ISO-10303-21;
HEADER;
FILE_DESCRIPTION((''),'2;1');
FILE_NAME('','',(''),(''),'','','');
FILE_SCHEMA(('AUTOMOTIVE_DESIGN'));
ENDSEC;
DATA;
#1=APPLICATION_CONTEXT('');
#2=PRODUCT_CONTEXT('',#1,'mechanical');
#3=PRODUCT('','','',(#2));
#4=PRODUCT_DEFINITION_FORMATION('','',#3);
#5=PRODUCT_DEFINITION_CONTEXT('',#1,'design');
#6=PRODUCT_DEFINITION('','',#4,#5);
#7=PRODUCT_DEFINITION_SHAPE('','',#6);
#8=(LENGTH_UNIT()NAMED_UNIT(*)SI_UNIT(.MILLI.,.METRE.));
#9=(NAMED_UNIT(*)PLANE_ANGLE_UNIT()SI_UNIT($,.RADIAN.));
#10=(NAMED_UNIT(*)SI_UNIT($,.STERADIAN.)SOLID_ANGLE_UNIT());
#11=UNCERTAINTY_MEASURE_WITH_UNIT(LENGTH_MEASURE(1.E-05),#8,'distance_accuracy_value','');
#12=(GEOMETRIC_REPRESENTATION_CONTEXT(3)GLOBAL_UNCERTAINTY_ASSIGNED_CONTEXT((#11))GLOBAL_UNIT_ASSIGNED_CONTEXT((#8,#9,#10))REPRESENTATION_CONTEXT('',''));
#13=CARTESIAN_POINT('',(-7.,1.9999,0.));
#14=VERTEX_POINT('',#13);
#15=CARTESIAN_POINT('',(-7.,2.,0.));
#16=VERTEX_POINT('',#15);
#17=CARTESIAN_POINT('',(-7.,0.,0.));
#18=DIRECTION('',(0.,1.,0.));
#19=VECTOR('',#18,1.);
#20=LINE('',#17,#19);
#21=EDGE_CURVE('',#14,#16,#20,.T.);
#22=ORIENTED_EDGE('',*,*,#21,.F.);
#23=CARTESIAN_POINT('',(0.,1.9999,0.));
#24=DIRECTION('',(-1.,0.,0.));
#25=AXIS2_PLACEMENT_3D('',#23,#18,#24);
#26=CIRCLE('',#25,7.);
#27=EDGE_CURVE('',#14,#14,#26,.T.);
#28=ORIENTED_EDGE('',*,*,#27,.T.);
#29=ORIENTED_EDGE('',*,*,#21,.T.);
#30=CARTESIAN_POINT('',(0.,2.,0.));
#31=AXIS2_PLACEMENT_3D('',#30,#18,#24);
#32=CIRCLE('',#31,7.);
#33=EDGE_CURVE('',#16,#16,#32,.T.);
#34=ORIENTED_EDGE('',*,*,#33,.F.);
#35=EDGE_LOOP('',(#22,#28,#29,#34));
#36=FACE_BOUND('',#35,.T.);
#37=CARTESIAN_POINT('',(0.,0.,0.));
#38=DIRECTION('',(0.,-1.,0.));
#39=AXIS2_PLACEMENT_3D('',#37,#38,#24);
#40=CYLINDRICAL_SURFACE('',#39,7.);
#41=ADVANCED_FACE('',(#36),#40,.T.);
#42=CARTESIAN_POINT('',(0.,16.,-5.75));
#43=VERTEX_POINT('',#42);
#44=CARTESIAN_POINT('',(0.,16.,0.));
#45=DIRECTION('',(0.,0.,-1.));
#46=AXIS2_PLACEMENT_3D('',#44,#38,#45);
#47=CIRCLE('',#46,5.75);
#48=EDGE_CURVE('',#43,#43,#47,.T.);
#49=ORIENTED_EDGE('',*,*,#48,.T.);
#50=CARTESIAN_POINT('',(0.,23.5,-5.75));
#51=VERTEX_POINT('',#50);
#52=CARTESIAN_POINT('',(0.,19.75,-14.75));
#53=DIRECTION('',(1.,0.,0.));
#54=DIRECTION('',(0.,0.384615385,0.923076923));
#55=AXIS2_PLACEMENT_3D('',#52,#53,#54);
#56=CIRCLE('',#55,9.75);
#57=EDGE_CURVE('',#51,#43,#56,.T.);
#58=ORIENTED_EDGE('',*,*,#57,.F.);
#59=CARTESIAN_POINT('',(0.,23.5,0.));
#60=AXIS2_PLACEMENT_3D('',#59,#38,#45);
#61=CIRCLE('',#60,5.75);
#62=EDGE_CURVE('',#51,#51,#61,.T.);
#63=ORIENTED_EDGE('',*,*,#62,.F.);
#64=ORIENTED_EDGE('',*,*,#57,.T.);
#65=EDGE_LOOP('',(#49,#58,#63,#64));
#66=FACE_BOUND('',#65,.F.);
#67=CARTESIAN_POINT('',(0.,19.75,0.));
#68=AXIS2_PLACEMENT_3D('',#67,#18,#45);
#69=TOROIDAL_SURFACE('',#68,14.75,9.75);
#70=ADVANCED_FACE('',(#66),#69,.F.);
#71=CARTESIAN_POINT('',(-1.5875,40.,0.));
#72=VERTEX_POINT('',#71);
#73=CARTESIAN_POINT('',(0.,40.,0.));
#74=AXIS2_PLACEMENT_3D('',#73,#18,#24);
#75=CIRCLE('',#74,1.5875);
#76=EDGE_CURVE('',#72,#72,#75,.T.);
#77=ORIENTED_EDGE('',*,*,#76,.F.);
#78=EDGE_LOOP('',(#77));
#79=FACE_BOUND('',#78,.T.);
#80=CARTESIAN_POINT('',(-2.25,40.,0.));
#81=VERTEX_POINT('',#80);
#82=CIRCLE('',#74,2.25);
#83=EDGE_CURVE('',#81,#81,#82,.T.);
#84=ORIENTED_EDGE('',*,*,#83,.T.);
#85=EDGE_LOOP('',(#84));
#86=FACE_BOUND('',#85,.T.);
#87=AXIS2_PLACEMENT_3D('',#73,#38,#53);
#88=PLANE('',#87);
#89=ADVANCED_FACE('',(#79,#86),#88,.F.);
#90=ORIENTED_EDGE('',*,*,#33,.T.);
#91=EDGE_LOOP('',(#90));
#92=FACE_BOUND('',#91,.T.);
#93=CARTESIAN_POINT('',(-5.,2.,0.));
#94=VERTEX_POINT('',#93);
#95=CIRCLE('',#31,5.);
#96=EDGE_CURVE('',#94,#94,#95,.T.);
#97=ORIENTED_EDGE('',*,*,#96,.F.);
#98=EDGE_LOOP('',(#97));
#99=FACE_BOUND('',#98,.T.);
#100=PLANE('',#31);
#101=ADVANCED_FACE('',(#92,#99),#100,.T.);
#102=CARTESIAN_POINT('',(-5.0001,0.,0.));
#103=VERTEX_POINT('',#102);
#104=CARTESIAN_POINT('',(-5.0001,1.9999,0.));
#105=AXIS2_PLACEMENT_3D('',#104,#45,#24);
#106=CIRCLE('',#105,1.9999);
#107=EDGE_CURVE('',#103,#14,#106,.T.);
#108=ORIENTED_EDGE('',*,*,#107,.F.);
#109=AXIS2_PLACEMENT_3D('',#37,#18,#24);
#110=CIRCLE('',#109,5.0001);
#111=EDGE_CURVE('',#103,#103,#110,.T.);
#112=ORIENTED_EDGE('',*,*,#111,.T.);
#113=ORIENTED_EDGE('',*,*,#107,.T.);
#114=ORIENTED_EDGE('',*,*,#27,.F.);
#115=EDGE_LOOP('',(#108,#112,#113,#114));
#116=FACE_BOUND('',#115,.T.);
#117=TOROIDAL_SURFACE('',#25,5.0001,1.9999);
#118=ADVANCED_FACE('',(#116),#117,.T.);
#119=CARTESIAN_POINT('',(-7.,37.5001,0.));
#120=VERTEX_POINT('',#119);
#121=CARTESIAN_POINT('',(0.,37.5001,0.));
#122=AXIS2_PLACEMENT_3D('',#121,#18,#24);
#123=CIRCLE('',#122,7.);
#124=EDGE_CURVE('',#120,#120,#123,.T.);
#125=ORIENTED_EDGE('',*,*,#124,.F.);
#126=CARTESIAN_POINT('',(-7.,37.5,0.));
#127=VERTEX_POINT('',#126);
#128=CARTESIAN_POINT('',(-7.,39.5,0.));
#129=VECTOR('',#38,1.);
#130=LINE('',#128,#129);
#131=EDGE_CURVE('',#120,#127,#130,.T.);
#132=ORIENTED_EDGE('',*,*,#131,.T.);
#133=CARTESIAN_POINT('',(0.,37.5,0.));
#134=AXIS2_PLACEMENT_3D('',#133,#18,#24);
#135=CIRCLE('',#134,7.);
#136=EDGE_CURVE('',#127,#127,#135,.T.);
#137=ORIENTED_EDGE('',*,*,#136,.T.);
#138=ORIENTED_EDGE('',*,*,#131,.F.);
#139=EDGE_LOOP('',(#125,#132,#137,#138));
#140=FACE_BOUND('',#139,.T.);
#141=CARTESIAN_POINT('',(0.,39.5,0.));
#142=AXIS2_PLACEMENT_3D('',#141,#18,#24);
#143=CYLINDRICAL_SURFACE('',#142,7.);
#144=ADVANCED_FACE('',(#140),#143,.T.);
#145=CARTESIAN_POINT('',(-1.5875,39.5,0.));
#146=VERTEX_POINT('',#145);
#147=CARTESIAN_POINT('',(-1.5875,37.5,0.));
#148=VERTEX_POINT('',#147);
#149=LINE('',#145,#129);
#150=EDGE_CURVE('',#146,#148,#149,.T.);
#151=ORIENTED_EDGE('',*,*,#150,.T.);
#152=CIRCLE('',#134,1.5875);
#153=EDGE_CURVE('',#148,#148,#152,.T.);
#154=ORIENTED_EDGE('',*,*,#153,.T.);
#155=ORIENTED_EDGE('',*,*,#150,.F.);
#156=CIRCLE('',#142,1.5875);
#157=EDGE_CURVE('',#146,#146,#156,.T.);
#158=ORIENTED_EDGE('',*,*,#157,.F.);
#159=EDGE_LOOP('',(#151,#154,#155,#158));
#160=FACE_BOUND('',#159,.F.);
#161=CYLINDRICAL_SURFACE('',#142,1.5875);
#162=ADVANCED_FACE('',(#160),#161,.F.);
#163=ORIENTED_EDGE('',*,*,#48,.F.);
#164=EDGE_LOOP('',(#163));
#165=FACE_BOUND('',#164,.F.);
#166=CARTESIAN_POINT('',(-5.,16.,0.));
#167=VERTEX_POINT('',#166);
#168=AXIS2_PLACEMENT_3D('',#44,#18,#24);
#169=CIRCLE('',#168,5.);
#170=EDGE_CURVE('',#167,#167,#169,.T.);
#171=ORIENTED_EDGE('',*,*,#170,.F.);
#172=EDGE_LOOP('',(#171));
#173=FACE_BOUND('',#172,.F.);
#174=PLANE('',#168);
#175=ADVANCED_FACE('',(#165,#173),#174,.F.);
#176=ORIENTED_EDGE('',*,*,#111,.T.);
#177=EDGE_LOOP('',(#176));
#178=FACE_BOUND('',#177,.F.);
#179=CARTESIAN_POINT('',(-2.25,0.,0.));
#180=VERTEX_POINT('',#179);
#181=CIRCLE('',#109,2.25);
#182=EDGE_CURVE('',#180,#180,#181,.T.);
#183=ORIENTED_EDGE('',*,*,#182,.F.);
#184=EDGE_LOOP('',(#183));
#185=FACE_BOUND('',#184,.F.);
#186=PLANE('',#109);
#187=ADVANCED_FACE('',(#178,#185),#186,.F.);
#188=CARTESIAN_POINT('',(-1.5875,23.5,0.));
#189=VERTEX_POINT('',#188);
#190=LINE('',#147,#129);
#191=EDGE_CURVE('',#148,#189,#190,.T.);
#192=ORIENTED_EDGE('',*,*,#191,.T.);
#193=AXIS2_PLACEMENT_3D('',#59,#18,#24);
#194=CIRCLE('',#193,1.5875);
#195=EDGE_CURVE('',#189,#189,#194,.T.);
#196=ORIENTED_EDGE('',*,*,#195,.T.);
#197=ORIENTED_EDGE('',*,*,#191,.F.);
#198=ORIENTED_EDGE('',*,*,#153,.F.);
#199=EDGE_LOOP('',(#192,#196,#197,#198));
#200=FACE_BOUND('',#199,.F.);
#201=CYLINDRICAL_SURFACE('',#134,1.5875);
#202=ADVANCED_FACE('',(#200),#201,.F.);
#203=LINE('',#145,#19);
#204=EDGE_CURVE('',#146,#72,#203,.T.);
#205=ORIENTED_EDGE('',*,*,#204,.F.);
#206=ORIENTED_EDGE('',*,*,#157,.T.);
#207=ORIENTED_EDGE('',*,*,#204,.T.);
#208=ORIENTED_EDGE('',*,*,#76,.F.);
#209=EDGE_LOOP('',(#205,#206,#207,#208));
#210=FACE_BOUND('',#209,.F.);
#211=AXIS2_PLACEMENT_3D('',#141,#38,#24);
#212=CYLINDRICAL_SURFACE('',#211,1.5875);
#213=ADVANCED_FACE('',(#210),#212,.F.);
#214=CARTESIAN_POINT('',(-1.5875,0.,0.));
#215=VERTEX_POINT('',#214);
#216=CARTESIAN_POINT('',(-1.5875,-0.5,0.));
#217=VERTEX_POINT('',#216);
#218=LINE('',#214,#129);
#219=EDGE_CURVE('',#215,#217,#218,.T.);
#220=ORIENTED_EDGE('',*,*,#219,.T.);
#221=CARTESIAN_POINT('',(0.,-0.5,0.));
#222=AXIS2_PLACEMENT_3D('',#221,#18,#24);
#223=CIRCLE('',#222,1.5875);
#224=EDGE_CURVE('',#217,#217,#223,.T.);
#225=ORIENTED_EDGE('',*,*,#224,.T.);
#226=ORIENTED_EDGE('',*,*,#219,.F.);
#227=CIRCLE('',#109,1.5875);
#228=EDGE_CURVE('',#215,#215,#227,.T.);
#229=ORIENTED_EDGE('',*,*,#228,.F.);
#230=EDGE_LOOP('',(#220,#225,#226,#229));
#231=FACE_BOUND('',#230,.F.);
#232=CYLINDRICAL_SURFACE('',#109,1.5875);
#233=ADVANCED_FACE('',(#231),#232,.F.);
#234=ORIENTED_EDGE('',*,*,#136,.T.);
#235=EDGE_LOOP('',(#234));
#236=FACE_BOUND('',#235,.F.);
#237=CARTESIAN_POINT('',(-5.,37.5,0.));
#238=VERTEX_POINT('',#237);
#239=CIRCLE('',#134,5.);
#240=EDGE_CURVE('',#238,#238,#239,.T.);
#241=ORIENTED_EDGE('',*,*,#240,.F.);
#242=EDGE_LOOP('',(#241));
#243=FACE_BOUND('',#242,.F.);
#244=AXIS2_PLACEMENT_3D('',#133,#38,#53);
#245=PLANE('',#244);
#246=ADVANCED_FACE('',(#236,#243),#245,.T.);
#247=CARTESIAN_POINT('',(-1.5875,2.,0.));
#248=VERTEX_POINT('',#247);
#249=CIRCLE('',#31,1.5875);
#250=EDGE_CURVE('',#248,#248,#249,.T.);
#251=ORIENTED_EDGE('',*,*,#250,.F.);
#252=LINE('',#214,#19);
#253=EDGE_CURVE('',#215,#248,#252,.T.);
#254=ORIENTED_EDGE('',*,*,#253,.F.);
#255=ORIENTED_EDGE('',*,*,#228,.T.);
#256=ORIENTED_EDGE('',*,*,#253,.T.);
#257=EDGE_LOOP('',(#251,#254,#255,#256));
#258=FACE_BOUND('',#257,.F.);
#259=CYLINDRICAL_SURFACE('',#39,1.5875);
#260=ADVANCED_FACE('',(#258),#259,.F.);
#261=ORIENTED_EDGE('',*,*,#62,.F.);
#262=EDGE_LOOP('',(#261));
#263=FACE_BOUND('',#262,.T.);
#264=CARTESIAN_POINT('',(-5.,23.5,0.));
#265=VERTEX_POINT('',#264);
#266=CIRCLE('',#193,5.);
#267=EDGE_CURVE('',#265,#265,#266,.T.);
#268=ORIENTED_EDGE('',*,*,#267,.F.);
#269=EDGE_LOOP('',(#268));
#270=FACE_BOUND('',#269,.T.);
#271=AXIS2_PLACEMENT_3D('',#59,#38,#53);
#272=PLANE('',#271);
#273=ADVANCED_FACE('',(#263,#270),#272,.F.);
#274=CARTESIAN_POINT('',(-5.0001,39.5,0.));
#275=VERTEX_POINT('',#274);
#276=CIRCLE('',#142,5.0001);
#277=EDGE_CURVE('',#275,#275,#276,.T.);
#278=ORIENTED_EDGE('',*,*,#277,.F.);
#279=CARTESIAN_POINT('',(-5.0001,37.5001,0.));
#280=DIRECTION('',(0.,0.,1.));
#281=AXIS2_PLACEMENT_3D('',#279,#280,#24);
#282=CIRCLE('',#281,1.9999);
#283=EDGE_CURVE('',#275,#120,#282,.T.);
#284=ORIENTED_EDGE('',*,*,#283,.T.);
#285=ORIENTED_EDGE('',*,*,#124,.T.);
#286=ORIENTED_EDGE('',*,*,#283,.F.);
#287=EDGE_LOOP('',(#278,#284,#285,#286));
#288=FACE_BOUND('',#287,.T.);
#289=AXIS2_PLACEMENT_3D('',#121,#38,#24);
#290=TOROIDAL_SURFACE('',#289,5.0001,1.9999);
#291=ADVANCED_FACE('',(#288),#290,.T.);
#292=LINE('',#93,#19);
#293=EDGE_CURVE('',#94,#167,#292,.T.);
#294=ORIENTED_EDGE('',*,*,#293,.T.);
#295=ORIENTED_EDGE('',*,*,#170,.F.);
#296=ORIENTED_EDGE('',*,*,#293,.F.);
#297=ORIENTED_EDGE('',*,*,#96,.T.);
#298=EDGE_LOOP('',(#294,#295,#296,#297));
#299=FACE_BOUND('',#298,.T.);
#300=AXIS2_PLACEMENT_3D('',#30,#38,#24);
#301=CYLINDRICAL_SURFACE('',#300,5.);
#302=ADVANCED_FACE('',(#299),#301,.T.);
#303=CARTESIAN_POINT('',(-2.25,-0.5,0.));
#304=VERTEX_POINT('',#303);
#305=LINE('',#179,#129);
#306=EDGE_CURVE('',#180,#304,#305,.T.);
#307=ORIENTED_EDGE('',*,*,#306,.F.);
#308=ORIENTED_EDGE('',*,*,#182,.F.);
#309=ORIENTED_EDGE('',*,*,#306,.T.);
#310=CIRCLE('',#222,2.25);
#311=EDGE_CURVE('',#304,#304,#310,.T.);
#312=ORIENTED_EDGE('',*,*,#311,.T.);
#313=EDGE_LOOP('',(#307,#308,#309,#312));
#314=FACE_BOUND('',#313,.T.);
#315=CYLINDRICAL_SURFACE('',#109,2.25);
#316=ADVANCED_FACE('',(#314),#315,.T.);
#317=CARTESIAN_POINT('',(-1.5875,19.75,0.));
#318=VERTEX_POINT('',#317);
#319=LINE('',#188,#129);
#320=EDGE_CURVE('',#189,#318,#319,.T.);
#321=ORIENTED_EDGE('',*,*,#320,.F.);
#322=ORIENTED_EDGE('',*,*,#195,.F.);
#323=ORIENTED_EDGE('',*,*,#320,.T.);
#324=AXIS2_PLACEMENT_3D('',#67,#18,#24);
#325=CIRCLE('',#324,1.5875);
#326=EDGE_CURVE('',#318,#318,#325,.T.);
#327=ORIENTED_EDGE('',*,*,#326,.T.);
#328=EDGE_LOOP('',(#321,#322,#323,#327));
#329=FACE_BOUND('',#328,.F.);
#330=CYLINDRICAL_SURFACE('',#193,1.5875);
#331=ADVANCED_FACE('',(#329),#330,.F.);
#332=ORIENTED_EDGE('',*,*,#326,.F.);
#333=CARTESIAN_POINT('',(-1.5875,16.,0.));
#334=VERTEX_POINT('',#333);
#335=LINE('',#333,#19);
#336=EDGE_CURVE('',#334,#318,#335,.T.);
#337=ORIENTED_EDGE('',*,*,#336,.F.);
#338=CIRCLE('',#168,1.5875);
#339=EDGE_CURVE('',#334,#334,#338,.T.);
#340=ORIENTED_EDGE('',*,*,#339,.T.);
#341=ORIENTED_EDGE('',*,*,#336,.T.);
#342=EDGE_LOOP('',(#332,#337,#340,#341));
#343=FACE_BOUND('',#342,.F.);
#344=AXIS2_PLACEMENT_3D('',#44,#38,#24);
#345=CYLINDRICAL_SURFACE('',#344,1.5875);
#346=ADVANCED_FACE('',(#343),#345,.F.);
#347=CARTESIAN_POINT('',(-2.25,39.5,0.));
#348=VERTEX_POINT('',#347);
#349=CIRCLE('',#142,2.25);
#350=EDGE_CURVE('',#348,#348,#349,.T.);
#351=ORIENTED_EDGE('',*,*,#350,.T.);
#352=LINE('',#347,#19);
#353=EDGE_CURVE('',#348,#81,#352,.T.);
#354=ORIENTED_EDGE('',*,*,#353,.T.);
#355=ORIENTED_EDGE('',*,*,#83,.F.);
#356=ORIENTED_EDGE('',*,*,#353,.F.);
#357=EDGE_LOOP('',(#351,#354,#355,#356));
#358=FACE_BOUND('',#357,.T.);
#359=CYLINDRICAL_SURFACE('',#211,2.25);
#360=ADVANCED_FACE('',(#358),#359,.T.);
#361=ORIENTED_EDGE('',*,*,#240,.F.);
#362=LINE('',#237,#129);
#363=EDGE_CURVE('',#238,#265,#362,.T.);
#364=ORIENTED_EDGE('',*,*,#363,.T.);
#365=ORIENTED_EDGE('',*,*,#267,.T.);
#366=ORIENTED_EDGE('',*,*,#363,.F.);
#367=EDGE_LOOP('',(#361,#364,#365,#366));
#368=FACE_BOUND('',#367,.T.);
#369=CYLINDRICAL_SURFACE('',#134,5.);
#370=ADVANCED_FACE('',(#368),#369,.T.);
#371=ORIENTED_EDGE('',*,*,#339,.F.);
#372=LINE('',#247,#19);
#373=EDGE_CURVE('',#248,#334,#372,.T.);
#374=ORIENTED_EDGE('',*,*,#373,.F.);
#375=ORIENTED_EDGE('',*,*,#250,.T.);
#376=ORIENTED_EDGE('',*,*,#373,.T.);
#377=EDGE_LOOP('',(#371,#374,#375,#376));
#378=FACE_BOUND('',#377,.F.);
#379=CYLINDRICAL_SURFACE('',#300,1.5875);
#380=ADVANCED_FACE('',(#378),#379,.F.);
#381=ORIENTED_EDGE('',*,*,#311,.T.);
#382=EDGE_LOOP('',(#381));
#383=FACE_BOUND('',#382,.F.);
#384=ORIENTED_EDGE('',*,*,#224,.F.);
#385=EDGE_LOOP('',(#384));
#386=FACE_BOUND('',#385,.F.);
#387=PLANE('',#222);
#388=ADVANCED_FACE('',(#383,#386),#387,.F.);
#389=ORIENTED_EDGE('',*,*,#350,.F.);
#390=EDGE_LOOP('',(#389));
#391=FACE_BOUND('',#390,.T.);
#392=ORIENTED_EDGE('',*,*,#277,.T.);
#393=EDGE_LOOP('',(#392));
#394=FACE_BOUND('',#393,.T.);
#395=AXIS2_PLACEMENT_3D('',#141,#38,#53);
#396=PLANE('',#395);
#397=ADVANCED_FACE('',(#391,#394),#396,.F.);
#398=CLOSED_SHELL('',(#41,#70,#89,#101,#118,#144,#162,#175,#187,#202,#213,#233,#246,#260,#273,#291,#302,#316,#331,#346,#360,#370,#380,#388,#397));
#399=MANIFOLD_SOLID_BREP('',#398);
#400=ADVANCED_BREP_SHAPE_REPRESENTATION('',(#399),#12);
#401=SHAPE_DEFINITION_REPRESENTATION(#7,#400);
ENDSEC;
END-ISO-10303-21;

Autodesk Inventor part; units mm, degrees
ref_plane "YZ Plane" through (0, 0, 0) normal (1, 0, 0) x (0, 1, 0)
ref_plane "XZ Plane" through (0, 0, 0) normal (0, 1, 0) x (-1, 0, 0)
ref_plane "XY Plane" through (0, 0, 0) normal (0, 0, 1) x (1, 0, 0)
sketch "Sketch1" plane through (0, 0, 0) normal (0, 1, 0) x (-1, 0, 0)
  circle A0 centre (0, 0) radius 1.5875
  circle A1 centre (0, 0) radius 2.25
  circle A2 centre (0, 0) radius 7
  circle A3 centre (0, 0) radius 5
  circle A4 centre (0, 0) radius 5.75
  dimension "d0" = 3.175
  dimension "d1" = 4.5
  dimension "d2" = 14
  dimension "d3" = 10
  dimension "d4" = 11.5
extrude "Extrusion1" add sketch "Sketch1" against normal blind 0.5 contours A1
extrude "Extrusion2" add sketch "Sketch1" along normal blind 2 contours A1 | A2 | A3 | A4
extrude "Extrusion3" add sketch "Sketch1" along normal blind 14 from surface at 2 contours A1 | A3
extrude "Extrusion4" add sketch "Sketch1" along normal blind 3.75 from surface at 16 contours A1 | A3 | A4
fillet "Fillet1" radius 2 1 edges at (7, 0, 0)
mirror "Mirror1" about plane through (0, 19.75, 0) normal (0, 1, 0)
sketch "Sketch2" plane through (0, 0, 0) normal (1, 0, 0) x (0, 1, 0)
  line L0 (16, -5.75) -> (23.5, -5.75) projected
  line L1 (16, 5.75) -> (16, -5.75) projected
  arc A0 (23.5, -5.75) -> (16, -5.75) centre (19.75, -14.75) ccw
  line L2 (0, 0) -> (10, 0) construction
  point P0 (19.75, -5.75)
  point P1 (19.75, -5)
  dimension "d14" = 0.75
  dimension "d15" = 10
revolve "Revolution1" cut sketch "Sketch2" angle 360 about axis through (0, 0, 0) along (0, 1, 0)
properties part number "Dribbler Roller Seperator"
